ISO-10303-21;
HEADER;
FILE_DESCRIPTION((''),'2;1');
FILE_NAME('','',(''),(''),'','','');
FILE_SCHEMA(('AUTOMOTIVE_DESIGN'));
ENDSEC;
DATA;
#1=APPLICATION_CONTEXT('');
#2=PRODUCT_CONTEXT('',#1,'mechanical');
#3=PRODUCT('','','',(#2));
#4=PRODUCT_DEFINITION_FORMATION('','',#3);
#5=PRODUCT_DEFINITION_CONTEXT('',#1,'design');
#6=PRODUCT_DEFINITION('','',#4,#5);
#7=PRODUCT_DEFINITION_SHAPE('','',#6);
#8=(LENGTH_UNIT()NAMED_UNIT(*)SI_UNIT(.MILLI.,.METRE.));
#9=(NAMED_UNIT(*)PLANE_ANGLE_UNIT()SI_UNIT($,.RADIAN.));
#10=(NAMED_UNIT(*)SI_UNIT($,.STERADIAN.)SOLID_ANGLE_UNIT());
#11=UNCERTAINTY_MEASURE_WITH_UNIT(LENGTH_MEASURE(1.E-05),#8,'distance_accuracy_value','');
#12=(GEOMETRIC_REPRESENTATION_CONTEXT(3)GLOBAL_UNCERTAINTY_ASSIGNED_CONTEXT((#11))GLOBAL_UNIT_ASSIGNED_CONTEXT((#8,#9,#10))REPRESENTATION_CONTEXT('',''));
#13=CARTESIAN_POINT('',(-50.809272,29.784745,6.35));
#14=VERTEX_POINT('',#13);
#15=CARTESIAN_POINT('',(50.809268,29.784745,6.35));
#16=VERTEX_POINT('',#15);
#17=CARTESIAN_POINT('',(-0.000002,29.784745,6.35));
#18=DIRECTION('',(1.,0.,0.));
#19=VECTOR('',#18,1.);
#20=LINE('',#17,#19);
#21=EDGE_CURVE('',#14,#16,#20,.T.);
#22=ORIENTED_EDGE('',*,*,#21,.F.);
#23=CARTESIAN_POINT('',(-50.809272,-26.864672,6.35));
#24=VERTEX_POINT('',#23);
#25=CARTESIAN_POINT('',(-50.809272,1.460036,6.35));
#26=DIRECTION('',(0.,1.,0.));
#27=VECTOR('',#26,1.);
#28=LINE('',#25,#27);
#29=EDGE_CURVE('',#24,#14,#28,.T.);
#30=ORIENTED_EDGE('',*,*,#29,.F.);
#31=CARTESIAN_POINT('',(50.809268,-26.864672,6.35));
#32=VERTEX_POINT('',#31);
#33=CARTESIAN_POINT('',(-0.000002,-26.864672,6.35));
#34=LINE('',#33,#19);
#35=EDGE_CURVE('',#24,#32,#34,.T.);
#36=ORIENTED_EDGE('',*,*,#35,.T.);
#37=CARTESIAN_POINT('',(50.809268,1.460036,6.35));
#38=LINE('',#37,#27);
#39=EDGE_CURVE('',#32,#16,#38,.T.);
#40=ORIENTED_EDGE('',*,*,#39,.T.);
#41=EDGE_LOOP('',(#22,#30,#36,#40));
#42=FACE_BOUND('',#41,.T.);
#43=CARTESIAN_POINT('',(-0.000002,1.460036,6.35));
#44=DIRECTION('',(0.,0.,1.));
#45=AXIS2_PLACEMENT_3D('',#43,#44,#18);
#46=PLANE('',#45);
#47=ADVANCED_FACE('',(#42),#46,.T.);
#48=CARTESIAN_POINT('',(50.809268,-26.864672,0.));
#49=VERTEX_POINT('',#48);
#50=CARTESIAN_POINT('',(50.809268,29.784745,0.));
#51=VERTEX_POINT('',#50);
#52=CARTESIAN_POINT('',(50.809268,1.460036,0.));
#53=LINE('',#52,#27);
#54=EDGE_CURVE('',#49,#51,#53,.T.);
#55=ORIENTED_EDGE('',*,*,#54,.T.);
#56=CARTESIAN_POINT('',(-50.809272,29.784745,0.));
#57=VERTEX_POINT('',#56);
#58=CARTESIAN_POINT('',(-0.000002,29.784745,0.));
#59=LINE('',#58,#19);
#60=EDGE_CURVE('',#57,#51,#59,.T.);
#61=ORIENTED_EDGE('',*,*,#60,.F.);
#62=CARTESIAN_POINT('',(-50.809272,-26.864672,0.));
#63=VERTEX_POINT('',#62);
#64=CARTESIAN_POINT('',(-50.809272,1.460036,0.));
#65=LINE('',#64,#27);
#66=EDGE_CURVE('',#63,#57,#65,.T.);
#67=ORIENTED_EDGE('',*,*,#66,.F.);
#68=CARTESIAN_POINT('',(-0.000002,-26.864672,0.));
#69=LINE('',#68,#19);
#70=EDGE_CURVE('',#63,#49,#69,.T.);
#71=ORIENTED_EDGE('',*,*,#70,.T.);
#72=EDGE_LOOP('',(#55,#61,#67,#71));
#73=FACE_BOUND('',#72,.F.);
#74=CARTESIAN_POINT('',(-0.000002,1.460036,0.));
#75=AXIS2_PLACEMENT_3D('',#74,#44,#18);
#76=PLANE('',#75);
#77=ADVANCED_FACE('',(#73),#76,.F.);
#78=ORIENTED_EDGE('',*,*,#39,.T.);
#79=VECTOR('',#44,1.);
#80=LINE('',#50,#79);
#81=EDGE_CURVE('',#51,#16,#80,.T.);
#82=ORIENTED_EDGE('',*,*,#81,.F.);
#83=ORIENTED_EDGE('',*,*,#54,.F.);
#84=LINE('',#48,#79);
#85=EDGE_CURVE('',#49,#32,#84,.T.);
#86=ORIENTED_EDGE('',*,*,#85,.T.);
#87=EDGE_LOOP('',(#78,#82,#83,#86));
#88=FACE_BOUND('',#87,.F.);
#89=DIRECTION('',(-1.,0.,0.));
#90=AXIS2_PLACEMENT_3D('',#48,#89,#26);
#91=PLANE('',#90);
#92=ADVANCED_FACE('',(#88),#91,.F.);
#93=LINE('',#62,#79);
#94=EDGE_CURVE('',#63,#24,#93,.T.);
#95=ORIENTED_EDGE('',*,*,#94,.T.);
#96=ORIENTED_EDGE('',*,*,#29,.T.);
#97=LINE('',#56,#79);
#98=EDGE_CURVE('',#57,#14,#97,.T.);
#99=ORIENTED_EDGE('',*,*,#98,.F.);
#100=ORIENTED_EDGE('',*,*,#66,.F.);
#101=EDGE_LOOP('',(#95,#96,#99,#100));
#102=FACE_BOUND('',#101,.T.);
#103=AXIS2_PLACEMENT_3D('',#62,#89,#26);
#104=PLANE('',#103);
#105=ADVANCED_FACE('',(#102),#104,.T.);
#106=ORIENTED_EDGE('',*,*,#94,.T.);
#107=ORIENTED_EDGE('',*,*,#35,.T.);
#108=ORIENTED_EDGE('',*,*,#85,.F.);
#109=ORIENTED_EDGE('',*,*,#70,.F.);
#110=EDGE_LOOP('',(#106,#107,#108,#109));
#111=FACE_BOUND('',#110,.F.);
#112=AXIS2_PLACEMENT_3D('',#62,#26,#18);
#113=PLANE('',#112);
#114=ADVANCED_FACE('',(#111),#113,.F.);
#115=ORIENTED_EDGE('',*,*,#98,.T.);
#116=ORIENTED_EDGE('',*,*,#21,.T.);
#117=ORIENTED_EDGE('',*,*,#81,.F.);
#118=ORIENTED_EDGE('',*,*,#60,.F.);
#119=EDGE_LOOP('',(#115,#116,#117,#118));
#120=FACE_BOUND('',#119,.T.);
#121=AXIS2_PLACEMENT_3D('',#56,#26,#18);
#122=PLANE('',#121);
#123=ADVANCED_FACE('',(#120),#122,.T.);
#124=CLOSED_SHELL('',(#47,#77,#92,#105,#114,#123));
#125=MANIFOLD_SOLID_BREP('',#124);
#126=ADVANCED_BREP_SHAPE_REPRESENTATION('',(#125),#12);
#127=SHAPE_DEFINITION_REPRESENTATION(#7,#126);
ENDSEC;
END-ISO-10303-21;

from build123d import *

# Parameters (mm, degrees)
F0_W     = 101.618539542
F0_H     = 56.6494166851
F1_DEPTH = 6.35


# Not quite as in the source:
# - the program builds the solid bodies; features that only make, move or delete a surface that nothing else refers to are left out


with BuildPart() as f1:
    # F0 (on Top) → F1 (new body)
    with BuildSketch(Plane.XY):
        with Locations((-1.8626e-06, 1.4600362629)):
            Rectangle(F0_W, F0_H)
    extrude(amount=F1_DEPTH)


solid = f1.part
